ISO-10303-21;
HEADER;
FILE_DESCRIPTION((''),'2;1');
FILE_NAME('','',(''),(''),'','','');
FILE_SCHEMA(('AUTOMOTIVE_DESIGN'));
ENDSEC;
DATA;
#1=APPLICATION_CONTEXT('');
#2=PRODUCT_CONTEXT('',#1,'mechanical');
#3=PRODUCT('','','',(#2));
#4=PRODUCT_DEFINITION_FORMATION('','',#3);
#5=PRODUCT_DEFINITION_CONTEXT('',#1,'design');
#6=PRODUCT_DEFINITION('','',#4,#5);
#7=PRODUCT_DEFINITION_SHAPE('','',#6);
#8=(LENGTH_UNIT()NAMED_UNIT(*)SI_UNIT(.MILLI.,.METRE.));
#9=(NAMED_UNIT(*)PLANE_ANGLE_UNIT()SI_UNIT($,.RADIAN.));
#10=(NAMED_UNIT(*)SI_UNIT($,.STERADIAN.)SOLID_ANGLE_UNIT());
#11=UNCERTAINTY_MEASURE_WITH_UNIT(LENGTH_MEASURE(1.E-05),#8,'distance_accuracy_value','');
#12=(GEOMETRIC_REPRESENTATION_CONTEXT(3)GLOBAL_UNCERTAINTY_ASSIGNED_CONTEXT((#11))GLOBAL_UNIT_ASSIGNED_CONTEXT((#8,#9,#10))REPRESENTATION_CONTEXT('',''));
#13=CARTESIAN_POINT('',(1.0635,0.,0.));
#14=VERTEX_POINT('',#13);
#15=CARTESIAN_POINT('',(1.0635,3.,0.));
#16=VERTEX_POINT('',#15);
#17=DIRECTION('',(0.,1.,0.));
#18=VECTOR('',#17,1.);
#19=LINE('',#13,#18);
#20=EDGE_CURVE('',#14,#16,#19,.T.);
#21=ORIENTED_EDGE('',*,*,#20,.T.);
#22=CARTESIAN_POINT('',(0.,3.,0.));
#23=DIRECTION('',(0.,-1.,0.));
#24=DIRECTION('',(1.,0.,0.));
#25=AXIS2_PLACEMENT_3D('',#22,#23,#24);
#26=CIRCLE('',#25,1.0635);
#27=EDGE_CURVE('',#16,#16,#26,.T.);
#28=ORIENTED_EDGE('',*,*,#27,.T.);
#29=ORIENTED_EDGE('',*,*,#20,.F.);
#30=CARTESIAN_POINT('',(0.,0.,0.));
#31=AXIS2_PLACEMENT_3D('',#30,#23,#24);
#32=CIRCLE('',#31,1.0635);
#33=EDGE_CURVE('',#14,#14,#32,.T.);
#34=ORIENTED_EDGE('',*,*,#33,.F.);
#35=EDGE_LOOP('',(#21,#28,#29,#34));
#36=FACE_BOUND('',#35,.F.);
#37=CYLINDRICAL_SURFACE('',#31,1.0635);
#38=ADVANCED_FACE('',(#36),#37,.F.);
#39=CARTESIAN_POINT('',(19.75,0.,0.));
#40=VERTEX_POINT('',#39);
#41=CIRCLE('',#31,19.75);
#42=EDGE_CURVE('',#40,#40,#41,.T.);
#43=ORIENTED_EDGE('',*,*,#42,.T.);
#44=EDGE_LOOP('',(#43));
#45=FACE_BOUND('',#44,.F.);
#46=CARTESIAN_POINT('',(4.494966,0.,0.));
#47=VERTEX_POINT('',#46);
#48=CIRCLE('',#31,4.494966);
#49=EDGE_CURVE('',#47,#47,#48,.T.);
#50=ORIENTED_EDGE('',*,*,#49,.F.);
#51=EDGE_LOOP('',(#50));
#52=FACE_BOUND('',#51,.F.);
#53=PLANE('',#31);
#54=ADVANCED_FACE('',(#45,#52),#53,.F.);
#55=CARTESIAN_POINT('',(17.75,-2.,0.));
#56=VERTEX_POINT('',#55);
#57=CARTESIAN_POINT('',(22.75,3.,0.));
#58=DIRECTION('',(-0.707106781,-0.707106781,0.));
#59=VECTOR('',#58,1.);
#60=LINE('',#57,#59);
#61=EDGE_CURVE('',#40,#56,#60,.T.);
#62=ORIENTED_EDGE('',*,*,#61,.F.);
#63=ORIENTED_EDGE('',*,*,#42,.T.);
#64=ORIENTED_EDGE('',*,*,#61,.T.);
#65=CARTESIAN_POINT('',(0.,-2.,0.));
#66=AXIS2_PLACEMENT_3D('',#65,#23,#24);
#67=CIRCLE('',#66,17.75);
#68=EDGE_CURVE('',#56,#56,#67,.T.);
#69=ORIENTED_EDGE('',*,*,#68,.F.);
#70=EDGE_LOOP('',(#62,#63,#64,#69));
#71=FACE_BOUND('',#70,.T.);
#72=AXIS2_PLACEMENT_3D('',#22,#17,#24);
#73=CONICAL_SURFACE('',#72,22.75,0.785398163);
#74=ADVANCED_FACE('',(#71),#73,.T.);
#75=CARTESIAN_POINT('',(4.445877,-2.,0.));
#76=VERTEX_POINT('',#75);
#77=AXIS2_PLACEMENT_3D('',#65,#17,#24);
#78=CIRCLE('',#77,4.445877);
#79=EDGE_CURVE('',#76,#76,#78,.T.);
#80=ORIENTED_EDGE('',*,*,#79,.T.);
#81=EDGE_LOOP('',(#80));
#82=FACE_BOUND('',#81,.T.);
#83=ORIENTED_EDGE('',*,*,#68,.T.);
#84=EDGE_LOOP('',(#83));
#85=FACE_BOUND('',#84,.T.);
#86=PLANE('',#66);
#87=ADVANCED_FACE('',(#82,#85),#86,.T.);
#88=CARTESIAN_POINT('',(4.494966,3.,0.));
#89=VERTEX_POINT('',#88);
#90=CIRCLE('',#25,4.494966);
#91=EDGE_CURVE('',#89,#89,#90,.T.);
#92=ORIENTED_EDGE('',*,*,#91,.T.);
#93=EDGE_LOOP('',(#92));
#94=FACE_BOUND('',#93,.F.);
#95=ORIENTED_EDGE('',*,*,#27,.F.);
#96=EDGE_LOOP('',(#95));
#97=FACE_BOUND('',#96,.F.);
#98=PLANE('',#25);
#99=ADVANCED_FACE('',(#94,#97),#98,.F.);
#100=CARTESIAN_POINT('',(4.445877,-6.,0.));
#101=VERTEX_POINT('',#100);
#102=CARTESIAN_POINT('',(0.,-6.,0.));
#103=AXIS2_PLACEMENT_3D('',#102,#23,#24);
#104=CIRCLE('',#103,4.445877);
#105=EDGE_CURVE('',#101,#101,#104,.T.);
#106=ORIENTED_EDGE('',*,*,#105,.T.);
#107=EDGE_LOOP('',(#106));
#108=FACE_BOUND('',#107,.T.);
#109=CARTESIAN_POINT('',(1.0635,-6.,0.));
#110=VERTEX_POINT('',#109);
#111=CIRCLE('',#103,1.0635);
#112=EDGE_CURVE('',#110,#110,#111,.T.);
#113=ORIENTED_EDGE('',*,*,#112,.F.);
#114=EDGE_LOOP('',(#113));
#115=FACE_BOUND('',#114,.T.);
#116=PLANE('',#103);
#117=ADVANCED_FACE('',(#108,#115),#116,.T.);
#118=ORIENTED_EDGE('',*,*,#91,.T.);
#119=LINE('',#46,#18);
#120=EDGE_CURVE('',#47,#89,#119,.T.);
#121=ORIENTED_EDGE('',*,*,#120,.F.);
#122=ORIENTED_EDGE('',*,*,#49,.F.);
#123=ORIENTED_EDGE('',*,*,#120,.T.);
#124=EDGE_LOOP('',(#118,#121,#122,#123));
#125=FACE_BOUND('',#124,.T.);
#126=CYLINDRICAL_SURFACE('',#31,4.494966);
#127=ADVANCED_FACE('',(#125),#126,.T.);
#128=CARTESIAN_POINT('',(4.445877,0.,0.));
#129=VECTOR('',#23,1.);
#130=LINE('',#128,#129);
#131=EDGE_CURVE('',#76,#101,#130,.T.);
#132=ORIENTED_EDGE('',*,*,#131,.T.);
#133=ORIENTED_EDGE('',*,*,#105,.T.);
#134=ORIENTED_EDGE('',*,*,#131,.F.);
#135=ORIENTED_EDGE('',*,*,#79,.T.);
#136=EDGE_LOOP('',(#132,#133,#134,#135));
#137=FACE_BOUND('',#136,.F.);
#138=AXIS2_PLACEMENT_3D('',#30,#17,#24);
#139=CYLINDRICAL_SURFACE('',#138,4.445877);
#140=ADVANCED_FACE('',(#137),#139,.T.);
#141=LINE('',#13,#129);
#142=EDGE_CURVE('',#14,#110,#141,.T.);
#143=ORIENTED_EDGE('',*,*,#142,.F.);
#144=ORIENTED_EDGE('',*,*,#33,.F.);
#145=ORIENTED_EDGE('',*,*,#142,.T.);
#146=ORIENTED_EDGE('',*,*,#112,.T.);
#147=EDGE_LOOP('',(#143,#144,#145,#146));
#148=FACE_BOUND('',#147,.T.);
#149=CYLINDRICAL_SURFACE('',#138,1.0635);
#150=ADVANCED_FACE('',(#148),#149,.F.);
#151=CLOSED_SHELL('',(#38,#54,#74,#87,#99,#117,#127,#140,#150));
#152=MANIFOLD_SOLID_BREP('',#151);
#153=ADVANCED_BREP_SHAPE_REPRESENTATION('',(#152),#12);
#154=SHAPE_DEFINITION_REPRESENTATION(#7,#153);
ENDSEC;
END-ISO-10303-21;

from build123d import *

# Parameters (mm, degrees)
F0_R     = 22.75
F1_DEPTH = 2
F2_R     = 4.4458772924
F3_DEPTH = 6
F4_R     = 4.4949655375
F5_DEPTH = 3
F6_R     = 1.0635
F7_DEPTH = 6
F8_R     = 1.0635
F9_DEPTH = 6


# Not quite as in the source:
# - a fillet or chamfer that OpenCascade refuses, or shapes differently, is made with other operations: its cross-section is extruded or revolved along the edge and cut away or added


with BuildPart() as f1:
    # F0 (on Front) → F1 (new body)
    with BuildSketch(Plane.XZ):
        Circle(F0_R)
    extrude(amount=F1_DEPTH)

    # F2 (on Front) → F3 (join)
    with BuildSketch(Plane.XZ):
        Circle(F2_R)
    extrude(amount=F3_DEPTH)

    # F4 (on Front) → F5 (join)
    with BuildSketch(Plane.XZ):
        Circle(F4_R)
    extrude(amount=-F5_DEPTH)

    # F6 (on Front) → F7 (cut)
    with BuildSketch(Plane.XZ):
        Circle(F6_R)
    extrude(amount=F7_DEPTH, mode=Mode.SUBTRACT)

    # F8 (on Front) → F9 (cut)
    with BuildSketch(Plane.XZ):
        Circle(F8_R)
    extrude(amount=-F9_DEPTH, mode=Mode.SUBTRACT)

    # F10: chamfer of 5 on 1 edges, made by hand

    # F10_s1 → F10_t2 (revolve, cut)
    with BuildSketch(Plane.XY):
        Polygon((22.75, 3), (17.75, -2), (22.75, -2), align=None)
    revolve(axis=Axis((0, -2, 0), (0, -1, 0)), mode=Mode.SUBTRACT)


solid = f1.part
